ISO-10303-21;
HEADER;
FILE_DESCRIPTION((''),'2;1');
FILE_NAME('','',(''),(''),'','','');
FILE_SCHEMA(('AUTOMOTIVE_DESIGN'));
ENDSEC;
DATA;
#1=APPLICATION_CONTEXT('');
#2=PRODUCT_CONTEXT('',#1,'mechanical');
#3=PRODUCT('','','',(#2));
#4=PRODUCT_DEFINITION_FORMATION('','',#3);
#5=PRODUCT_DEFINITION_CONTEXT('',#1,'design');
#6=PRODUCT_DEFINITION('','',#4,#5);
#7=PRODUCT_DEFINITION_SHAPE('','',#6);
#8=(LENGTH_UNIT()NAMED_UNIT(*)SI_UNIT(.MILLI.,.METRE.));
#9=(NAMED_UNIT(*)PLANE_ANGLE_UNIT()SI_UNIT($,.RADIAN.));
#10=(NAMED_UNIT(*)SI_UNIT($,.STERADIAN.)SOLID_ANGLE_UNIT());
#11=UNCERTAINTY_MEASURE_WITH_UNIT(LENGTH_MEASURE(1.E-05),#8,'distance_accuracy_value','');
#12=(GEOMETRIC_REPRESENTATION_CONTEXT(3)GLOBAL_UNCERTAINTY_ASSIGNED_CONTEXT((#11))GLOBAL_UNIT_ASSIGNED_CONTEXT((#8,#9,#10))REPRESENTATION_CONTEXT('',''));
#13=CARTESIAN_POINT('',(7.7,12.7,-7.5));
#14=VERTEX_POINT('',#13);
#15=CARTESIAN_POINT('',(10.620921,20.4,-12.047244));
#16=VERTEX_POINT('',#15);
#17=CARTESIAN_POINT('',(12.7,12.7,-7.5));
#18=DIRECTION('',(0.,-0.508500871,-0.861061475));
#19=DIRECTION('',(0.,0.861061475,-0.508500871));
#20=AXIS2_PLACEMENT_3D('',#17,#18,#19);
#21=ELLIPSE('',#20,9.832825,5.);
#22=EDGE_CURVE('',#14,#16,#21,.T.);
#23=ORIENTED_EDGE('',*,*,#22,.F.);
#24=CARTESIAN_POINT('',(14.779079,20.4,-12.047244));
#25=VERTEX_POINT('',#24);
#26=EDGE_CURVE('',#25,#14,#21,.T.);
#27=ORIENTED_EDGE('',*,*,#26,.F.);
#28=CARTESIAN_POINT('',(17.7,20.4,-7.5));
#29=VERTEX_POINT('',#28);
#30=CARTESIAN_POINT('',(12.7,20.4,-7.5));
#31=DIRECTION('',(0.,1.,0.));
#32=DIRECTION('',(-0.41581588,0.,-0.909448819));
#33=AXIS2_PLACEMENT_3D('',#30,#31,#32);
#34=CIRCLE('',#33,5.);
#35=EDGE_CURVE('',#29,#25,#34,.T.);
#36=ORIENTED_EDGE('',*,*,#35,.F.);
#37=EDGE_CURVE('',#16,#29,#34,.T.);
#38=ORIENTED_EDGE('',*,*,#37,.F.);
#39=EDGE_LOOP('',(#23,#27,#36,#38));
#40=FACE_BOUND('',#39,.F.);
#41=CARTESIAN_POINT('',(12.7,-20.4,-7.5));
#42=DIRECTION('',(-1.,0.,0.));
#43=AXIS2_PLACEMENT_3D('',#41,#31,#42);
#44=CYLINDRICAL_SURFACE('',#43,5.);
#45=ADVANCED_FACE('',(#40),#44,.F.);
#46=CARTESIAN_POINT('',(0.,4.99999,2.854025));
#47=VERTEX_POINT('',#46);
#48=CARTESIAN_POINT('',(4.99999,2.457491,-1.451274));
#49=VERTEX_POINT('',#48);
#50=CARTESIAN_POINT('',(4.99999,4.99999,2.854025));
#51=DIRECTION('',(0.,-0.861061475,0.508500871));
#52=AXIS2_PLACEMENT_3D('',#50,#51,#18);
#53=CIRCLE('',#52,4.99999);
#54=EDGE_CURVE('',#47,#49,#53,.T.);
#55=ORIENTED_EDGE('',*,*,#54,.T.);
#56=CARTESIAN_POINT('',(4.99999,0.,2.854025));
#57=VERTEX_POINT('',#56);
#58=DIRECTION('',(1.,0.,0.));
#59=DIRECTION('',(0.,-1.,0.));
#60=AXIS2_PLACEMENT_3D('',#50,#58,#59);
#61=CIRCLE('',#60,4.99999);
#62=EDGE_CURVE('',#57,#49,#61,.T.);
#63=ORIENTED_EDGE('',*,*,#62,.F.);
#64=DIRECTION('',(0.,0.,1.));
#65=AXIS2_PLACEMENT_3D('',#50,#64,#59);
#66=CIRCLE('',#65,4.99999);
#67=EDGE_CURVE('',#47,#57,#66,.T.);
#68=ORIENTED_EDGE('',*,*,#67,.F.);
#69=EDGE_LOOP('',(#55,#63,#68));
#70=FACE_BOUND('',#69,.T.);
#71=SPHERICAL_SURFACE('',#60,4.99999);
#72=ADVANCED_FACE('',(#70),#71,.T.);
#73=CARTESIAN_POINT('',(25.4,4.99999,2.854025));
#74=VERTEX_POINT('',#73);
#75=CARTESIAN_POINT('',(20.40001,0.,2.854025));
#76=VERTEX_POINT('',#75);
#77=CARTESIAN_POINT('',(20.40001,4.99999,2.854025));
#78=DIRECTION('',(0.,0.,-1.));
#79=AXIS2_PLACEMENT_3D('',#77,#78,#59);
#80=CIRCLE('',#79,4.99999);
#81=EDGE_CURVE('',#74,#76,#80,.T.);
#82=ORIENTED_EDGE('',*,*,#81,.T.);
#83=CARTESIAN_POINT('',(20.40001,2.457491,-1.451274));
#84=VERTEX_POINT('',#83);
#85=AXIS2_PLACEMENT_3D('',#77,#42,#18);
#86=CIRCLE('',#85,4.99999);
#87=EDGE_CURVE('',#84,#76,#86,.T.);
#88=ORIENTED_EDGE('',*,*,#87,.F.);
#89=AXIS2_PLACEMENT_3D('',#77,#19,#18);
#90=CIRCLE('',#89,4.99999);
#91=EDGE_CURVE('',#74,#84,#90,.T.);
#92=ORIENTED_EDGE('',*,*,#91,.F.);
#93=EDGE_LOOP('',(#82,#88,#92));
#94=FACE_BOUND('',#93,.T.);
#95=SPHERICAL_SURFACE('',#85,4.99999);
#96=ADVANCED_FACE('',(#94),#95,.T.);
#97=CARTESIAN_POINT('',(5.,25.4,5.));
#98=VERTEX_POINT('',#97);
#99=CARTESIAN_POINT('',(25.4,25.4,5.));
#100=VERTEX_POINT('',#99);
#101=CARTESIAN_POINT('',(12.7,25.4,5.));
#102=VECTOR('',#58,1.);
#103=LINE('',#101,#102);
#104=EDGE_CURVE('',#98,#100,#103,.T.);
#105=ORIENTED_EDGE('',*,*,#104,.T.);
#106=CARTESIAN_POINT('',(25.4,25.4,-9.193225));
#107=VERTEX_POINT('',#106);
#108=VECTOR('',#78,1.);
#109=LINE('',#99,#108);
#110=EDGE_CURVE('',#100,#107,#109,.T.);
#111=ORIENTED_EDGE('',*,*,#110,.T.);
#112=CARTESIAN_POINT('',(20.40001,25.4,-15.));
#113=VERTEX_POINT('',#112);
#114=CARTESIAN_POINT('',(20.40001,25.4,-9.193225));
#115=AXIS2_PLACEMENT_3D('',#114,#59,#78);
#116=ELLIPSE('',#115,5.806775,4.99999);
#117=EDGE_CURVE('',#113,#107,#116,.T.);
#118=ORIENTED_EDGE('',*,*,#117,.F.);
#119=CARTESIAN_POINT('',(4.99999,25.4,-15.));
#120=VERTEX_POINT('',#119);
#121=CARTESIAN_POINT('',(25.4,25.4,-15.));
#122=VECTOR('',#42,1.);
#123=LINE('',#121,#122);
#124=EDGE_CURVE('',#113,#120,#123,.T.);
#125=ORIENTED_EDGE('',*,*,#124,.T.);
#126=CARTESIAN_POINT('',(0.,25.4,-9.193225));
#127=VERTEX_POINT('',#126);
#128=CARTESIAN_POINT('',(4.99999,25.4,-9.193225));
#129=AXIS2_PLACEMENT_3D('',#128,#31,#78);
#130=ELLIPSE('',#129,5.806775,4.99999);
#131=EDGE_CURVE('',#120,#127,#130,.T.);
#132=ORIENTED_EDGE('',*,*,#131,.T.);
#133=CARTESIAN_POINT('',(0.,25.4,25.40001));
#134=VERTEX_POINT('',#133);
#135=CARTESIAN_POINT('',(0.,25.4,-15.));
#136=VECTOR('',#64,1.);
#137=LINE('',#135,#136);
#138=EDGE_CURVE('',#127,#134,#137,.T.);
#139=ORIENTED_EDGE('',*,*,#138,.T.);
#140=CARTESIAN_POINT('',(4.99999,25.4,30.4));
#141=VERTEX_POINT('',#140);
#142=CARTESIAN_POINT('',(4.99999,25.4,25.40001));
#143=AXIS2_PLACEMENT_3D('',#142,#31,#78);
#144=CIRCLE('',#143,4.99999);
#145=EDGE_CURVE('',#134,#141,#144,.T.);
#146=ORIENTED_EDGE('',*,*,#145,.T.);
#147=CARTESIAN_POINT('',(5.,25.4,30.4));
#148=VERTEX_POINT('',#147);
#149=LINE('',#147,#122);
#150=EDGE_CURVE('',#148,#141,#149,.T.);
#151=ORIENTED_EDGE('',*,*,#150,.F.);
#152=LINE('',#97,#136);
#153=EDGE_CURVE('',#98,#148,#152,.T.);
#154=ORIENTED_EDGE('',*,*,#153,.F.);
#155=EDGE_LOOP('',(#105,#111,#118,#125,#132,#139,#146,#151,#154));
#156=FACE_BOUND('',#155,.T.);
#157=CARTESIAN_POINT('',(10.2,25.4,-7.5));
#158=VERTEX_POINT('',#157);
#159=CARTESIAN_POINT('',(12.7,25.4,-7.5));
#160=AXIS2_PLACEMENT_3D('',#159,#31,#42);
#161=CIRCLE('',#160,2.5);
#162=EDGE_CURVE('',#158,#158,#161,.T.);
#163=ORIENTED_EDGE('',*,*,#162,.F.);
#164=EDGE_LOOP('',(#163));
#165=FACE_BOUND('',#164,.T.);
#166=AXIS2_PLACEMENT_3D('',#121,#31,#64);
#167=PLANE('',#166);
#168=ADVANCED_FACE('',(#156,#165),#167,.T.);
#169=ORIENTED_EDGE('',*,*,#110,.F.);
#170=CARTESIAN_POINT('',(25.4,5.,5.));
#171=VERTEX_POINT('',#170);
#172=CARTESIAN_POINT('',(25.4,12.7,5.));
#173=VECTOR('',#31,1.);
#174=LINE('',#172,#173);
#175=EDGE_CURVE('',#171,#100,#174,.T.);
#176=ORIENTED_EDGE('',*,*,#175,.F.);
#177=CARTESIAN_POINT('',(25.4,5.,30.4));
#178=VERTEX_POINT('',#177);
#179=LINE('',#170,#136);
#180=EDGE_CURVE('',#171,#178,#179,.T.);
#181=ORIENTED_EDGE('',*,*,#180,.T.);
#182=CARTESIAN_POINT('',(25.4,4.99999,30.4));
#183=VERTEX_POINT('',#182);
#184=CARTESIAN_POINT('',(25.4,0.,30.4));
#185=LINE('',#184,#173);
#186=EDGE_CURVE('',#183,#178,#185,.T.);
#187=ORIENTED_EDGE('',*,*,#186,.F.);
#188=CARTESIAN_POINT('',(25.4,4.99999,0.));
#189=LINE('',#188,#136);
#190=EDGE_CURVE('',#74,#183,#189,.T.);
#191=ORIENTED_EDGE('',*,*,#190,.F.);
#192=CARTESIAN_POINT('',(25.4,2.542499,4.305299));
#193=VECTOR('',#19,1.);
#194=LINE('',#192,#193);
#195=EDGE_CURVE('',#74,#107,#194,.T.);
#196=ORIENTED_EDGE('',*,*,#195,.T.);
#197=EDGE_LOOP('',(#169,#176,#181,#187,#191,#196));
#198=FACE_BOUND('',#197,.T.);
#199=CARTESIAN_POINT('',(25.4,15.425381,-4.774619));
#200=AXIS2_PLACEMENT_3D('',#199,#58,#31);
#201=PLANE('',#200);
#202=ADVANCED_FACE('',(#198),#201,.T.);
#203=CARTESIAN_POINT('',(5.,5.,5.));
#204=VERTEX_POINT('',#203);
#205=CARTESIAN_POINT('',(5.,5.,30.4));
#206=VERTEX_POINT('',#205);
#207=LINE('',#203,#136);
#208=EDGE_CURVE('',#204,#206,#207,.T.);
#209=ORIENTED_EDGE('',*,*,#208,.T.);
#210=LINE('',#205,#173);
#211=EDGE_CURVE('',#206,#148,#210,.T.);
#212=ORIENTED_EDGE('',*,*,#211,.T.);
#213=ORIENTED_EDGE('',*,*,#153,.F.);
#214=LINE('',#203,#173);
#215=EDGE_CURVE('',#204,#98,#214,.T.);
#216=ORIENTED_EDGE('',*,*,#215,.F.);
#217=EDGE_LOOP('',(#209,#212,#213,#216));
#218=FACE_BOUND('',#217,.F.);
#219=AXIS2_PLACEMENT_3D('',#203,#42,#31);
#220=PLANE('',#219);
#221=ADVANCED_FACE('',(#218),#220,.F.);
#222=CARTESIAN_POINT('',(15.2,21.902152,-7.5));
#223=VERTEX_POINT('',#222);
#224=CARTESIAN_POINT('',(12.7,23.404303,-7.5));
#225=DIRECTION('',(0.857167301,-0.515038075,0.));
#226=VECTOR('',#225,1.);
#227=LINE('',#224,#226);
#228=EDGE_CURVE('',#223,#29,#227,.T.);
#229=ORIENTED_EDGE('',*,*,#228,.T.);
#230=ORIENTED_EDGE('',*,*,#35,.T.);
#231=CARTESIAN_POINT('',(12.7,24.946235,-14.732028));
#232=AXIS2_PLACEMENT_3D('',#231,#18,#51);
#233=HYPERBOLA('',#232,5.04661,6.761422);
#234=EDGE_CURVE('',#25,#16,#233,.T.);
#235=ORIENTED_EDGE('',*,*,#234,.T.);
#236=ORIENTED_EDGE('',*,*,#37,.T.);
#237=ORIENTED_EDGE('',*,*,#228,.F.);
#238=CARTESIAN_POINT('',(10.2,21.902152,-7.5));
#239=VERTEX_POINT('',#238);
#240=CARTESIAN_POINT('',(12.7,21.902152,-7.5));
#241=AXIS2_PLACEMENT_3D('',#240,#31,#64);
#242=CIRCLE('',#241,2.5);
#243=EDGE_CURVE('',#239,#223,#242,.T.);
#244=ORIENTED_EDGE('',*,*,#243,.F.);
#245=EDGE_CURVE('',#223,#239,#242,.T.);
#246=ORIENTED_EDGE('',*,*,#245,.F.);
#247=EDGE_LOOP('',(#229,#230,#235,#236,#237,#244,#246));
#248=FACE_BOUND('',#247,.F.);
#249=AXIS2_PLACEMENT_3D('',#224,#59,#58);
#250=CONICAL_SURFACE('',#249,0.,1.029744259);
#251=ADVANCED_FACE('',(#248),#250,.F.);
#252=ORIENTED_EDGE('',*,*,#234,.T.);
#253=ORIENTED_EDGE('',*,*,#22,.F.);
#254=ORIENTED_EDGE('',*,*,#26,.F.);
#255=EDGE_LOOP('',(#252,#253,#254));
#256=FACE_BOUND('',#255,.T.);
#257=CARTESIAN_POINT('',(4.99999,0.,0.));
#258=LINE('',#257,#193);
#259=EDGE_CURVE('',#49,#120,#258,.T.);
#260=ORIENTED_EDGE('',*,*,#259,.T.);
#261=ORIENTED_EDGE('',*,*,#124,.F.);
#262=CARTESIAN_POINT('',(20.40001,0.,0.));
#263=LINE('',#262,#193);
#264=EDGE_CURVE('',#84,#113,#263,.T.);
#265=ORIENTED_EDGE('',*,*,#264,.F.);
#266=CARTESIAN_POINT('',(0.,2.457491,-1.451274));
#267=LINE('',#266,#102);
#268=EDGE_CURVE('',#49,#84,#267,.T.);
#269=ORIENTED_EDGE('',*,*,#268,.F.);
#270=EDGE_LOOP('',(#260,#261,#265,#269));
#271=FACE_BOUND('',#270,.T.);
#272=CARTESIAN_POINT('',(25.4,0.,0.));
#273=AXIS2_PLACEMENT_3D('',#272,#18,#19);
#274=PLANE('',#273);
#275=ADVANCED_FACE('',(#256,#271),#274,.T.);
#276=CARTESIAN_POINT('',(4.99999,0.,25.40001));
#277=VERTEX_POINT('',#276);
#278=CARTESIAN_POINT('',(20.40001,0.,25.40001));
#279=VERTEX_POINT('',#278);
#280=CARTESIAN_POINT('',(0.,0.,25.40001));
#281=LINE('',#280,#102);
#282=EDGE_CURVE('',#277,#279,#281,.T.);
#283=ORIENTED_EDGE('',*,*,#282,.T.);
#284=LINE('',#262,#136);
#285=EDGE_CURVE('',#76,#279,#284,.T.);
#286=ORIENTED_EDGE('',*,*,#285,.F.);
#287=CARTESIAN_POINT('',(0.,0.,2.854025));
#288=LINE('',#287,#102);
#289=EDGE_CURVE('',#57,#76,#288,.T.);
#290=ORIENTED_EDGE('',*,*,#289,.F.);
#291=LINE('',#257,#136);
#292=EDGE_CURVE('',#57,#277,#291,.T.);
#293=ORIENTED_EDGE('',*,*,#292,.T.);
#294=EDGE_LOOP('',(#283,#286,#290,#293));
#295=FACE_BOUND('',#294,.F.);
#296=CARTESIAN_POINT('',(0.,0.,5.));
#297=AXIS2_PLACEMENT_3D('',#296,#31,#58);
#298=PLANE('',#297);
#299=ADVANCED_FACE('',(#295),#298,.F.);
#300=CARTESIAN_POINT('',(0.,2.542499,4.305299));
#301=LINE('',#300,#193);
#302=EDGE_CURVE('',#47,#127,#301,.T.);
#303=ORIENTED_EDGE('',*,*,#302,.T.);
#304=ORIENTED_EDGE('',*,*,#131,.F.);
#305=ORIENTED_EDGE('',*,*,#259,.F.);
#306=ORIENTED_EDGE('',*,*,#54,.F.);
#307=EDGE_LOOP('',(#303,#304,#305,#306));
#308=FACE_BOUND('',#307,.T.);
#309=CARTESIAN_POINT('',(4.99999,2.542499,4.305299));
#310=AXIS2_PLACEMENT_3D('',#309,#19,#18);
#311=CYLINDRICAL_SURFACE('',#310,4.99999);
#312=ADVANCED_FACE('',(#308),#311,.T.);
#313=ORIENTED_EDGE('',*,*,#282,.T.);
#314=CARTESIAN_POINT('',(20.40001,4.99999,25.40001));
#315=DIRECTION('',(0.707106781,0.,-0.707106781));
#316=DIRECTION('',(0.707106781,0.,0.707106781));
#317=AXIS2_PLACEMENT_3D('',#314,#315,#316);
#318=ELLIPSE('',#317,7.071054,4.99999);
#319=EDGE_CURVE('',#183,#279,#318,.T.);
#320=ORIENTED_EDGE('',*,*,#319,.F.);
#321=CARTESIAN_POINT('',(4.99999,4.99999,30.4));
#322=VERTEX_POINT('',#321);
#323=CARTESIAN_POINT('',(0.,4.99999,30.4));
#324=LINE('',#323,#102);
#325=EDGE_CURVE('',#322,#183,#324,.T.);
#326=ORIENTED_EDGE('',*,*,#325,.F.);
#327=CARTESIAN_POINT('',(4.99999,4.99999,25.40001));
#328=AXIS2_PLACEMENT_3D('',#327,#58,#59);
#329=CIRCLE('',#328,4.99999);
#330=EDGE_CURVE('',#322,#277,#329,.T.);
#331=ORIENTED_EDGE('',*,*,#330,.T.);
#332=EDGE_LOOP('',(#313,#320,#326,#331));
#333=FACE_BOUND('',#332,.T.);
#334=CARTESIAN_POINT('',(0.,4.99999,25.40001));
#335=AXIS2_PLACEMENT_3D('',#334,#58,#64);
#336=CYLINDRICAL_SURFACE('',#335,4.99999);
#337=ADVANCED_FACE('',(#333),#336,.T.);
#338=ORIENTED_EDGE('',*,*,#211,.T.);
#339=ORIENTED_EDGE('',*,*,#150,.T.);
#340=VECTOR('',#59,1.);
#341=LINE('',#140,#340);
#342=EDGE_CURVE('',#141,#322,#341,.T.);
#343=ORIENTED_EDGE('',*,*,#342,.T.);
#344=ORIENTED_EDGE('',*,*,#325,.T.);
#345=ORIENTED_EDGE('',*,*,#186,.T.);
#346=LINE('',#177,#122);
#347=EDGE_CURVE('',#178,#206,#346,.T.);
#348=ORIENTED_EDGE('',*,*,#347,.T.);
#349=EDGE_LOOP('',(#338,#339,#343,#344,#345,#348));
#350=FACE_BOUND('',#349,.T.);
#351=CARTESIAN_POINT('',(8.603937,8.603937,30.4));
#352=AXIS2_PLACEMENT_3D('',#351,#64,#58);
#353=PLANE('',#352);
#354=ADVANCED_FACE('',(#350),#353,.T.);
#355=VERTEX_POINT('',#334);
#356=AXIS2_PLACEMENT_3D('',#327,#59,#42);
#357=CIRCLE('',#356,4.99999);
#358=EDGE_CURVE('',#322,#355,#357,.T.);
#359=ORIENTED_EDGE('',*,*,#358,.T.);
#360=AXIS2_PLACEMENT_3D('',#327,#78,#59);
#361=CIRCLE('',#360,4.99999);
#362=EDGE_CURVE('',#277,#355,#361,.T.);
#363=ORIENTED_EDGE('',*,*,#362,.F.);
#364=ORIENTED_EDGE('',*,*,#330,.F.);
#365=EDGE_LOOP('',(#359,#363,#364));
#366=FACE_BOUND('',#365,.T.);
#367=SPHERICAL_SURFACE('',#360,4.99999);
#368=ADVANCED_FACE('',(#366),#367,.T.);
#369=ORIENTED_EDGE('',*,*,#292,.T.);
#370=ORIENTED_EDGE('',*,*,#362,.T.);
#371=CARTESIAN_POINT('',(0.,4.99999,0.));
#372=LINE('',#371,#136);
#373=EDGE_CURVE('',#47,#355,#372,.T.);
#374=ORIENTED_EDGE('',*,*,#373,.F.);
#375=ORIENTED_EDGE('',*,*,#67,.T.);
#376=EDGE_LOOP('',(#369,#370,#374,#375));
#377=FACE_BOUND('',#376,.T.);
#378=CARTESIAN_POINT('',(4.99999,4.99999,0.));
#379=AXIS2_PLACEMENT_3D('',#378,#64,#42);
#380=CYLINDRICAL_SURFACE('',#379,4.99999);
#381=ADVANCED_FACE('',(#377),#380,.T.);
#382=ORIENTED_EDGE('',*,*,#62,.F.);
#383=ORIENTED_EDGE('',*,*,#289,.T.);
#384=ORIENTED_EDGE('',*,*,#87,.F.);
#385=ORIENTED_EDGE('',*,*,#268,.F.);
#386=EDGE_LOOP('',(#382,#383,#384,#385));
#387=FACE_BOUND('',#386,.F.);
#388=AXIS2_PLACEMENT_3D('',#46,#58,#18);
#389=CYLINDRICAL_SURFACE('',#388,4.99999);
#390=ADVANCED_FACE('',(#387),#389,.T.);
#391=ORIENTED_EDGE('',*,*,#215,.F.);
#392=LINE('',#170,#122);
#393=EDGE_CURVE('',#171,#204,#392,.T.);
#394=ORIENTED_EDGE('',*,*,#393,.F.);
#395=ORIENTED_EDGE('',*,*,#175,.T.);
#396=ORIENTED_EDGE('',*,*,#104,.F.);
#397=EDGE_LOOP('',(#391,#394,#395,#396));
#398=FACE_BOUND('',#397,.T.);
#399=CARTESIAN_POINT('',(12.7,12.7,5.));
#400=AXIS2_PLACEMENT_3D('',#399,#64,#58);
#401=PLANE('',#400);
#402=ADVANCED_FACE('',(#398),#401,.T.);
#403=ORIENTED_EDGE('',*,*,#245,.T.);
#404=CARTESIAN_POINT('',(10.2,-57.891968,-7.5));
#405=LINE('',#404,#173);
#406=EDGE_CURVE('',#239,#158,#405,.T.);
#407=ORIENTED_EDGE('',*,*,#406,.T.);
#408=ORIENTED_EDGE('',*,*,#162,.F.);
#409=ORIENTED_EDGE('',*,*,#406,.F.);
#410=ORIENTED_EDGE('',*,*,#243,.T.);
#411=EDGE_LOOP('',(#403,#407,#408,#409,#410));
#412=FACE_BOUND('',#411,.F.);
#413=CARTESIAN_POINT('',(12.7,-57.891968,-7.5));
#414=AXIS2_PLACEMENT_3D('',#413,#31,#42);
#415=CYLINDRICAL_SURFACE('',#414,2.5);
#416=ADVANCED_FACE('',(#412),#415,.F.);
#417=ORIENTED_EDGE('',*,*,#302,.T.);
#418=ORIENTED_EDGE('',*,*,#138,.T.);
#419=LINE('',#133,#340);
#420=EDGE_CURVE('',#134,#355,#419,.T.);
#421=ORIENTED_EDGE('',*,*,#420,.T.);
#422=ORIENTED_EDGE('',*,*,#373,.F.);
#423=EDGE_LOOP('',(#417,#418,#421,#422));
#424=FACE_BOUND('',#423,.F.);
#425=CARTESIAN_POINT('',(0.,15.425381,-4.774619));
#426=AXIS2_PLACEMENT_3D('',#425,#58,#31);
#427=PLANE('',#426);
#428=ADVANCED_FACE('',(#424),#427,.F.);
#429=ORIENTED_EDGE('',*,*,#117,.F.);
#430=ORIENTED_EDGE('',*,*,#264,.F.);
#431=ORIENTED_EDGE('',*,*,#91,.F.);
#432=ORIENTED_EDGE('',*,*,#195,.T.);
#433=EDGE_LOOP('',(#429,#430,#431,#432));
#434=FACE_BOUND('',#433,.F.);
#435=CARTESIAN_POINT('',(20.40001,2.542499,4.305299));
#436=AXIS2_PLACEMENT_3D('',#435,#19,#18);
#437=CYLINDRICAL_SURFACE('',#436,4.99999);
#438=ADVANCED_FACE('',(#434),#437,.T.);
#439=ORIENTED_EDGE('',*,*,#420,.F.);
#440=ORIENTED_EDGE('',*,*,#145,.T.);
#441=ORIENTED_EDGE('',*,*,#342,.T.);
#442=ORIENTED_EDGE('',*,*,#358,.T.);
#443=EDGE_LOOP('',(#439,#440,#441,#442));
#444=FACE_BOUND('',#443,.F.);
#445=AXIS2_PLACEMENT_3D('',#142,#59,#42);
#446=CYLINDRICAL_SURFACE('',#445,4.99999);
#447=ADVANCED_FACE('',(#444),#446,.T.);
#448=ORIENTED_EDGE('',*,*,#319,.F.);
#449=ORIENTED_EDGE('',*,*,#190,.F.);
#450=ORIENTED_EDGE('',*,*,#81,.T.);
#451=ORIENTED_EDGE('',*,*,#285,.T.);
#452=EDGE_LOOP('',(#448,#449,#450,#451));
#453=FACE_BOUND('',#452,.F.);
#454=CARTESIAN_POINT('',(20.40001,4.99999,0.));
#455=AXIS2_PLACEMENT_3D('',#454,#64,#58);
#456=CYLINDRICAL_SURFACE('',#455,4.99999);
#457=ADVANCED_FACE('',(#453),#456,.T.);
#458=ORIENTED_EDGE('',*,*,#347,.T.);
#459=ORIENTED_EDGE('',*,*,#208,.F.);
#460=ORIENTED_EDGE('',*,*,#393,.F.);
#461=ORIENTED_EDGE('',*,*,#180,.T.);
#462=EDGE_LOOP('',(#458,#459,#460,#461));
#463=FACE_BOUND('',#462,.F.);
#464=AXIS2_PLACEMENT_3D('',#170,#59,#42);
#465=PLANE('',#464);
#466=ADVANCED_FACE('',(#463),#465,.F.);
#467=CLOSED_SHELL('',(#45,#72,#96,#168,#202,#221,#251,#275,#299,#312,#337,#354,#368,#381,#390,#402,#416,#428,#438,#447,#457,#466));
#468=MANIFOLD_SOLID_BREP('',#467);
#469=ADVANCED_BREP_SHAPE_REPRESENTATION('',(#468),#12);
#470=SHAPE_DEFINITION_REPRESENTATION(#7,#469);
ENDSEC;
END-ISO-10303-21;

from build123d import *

# Parameters (mm, degrees)
F0_W     = 25.4
F0_H     = 25.4
F1_DEPTH = 5
F3_DEPTH = 25.4
F5_DEPTH = 25.4
F7_D     = 5
F9_D     = 10
F9_DEPTH = 20.4
F9_TIP   = 3.0043030951
F10_R    = 4.99999


# Not quite as in the source:
# - a fillet or chamfer is up to 0.001 mm smaller than in the source, because OpenCascade refuses the exact size


with BuildPart() as f1:
    # F0 (on Top) → F1 (new body)
    with BuildSketch(Plane.XY):
        with Locations((12.7, 12.7)):
            Rectangle(F0_W, F0_H)
    extrude(amount=F1_DEPTH)

    # F2 (on face) → F3 (join)
    with BuildSketch(Plane.XY.offset(5)):
        Polygon((5, 25.4), (0, 25.4), (0, 0), (25.4, 0), (25.4, 5), (5, 5), align=None)
    extrude(amount=F3_DEPTH)

    # F4 (on face) → F5 (join, through all)
    with BuildSketch(Plane.YZ.offset(25.4)):
        Polygon((25.4, -15), (25.4, 0), (0, 0), align=None)
    extrude(amount=-F5_DEPTH)

    # F7 (through all)
    with Locations(Plane.XZ):
        with Locations((12.7, -7.5)):
            Hole(F7_D / 2)

    # F9
    with Locations(Plane.XZ):
        with Locations((12.7, -7.5)):
            Hole(F9_D / 2, depth=F9_DEPTH)
            with Locations((0, 0, -(F9_DEPTH + F9_TIP / 2))):  # 118° drill point
                Cone(0, F9_D / 2, F9_TIP, mode=Mode.SUBTRACT)

    # F10 (radius 5 in the source; OpenCascade refuses exactly that, so slightly less here)
    f10_edges = [f1.edges().sort_by_distance(p)[0] for p in [
        (0, 0, 15.2),
        (0, 12.7, -7.5),
        (12.7, 0, 0),
        (25.4, 12.7, -7.5),
        (25.4, 0, 15.2),
        (12.7, 0, 30.4),
        (0, 12.7, 30.4),
    ]]
    fillet(f10_edges, radius=F10_R)


solid = f1.part
